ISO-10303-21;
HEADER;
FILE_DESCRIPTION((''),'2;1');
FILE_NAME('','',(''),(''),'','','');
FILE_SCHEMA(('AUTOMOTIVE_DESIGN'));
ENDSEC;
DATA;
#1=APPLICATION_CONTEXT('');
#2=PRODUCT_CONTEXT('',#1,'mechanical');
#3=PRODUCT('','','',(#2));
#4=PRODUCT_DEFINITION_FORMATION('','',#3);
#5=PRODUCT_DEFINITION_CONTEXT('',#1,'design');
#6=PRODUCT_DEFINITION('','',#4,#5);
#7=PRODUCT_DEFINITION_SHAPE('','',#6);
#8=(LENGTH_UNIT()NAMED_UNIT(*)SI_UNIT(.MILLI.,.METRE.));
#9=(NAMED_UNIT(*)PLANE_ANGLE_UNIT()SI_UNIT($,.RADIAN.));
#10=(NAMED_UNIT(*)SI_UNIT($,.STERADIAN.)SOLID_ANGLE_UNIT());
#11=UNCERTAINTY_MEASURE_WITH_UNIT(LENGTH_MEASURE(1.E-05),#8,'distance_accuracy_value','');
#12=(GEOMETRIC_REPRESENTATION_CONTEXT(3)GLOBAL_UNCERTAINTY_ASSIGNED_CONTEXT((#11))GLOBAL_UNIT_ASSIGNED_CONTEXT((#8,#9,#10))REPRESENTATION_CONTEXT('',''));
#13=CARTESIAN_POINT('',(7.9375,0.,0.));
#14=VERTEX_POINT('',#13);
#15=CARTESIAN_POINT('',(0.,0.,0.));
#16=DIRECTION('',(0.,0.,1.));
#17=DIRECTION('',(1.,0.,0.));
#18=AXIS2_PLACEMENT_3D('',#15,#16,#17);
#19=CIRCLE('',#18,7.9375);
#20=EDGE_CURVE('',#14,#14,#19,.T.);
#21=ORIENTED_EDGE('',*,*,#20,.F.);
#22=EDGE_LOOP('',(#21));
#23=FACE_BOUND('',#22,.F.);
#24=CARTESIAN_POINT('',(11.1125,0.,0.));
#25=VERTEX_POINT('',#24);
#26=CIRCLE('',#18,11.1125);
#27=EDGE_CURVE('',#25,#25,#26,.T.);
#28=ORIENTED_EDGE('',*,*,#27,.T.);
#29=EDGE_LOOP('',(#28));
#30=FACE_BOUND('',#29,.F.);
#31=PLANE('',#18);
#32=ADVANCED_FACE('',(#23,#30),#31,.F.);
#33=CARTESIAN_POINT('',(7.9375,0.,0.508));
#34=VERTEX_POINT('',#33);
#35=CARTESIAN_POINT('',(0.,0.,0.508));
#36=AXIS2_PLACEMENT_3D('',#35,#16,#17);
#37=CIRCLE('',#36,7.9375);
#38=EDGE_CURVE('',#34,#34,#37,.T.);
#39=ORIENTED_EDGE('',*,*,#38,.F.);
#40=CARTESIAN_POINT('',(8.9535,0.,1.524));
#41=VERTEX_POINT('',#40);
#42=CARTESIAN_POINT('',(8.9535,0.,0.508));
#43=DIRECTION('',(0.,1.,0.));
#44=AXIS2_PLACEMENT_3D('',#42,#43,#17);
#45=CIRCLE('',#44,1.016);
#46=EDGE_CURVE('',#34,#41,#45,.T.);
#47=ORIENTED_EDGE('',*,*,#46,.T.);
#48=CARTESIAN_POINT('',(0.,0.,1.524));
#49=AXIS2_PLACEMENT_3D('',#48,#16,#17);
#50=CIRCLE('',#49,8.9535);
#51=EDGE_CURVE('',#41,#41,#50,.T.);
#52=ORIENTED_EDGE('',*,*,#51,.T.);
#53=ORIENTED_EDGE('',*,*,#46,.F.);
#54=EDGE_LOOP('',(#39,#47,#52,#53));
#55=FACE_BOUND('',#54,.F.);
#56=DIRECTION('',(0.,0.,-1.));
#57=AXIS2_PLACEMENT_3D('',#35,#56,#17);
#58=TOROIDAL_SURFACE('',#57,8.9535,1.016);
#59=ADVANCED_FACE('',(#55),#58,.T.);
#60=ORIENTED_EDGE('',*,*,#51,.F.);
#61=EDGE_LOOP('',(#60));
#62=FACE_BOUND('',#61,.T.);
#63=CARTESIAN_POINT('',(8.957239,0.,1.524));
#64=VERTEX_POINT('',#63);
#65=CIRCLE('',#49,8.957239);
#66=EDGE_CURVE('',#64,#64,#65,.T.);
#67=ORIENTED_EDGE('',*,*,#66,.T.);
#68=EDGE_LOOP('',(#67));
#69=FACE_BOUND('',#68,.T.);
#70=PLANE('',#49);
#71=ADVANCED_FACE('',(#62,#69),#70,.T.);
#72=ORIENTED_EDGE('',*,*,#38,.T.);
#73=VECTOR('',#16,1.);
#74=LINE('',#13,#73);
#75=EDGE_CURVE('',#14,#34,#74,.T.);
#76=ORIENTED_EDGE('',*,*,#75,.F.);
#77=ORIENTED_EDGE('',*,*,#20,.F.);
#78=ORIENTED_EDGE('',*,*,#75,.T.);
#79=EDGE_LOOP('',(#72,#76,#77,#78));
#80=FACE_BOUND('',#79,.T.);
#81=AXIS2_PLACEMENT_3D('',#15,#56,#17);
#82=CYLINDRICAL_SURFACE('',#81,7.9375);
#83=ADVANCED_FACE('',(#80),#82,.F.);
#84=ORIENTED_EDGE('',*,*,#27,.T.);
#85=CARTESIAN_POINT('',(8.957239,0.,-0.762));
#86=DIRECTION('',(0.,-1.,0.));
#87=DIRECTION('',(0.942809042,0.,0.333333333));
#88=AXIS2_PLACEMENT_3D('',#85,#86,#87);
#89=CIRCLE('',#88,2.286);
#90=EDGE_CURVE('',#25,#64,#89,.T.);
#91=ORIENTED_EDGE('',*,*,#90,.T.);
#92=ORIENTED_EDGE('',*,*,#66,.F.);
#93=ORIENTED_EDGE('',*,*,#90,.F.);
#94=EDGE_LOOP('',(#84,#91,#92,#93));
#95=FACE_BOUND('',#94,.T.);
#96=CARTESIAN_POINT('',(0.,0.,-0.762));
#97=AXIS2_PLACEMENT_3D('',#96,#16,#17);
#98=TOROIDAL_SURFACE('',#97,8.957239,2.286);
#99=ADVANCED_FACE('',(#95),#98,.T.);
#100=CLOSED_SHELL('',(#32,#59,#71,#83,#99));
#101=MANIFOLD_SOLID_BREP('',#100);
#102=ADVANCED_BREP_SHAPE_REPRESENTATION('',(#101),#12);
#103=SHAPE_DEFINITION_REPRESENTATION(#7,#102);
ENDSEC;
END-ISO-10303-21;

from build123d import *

# Parameters (mm, degrees)
F0_R     = 11.1125
F0_R_2   = 7.9375
F1_DEPTH = 1.524
F3_R     = 1.016


# Not quite as in the source:
# - a fillet or chamfer that OpenCascade refuses, or shapes differently, is made with other operations: its cross-section is extruded or revolved along the edge and cut away or added


with BuildPart() as f1:
    # F0 (on Top) → F1 (new body)
    with BuildSketch(Plane.XY):
        Circle(F0_R)
        Circle(F0_R_2, mode=Mode.SUBTRACT)
    extrude(amount=F1_DEPTH)

    # F2: fillet of radius 2.286 on 1 edges, made by hand

    # F2_s1 → F2_t2 (revolve, cut)
    with BuildSketch(Plane.XZ):
        with BuildLine():
            ThreePointArc((11.1125, 0), (10.2770612463, 1.104511184), (8.9572385309, 1.524))
            Line((8.9572385309, 1.524), (11.1125, 1.524))
            Line((11.1125, 1.524), (11.1125, 0))
        make_face()
    revolve(axis=Axis((0, 0, 1.524), (0, 0, 1)), mode=Mode.SUBTRACT)

    # F3
    f3_edges = [f1.edges().sort_by_distance(p)[0] for p in [
        (-7.9375, 0, 1.524),
    ]]
    fillet(f3_edges, radius=F3_R)


solid = f1.part
